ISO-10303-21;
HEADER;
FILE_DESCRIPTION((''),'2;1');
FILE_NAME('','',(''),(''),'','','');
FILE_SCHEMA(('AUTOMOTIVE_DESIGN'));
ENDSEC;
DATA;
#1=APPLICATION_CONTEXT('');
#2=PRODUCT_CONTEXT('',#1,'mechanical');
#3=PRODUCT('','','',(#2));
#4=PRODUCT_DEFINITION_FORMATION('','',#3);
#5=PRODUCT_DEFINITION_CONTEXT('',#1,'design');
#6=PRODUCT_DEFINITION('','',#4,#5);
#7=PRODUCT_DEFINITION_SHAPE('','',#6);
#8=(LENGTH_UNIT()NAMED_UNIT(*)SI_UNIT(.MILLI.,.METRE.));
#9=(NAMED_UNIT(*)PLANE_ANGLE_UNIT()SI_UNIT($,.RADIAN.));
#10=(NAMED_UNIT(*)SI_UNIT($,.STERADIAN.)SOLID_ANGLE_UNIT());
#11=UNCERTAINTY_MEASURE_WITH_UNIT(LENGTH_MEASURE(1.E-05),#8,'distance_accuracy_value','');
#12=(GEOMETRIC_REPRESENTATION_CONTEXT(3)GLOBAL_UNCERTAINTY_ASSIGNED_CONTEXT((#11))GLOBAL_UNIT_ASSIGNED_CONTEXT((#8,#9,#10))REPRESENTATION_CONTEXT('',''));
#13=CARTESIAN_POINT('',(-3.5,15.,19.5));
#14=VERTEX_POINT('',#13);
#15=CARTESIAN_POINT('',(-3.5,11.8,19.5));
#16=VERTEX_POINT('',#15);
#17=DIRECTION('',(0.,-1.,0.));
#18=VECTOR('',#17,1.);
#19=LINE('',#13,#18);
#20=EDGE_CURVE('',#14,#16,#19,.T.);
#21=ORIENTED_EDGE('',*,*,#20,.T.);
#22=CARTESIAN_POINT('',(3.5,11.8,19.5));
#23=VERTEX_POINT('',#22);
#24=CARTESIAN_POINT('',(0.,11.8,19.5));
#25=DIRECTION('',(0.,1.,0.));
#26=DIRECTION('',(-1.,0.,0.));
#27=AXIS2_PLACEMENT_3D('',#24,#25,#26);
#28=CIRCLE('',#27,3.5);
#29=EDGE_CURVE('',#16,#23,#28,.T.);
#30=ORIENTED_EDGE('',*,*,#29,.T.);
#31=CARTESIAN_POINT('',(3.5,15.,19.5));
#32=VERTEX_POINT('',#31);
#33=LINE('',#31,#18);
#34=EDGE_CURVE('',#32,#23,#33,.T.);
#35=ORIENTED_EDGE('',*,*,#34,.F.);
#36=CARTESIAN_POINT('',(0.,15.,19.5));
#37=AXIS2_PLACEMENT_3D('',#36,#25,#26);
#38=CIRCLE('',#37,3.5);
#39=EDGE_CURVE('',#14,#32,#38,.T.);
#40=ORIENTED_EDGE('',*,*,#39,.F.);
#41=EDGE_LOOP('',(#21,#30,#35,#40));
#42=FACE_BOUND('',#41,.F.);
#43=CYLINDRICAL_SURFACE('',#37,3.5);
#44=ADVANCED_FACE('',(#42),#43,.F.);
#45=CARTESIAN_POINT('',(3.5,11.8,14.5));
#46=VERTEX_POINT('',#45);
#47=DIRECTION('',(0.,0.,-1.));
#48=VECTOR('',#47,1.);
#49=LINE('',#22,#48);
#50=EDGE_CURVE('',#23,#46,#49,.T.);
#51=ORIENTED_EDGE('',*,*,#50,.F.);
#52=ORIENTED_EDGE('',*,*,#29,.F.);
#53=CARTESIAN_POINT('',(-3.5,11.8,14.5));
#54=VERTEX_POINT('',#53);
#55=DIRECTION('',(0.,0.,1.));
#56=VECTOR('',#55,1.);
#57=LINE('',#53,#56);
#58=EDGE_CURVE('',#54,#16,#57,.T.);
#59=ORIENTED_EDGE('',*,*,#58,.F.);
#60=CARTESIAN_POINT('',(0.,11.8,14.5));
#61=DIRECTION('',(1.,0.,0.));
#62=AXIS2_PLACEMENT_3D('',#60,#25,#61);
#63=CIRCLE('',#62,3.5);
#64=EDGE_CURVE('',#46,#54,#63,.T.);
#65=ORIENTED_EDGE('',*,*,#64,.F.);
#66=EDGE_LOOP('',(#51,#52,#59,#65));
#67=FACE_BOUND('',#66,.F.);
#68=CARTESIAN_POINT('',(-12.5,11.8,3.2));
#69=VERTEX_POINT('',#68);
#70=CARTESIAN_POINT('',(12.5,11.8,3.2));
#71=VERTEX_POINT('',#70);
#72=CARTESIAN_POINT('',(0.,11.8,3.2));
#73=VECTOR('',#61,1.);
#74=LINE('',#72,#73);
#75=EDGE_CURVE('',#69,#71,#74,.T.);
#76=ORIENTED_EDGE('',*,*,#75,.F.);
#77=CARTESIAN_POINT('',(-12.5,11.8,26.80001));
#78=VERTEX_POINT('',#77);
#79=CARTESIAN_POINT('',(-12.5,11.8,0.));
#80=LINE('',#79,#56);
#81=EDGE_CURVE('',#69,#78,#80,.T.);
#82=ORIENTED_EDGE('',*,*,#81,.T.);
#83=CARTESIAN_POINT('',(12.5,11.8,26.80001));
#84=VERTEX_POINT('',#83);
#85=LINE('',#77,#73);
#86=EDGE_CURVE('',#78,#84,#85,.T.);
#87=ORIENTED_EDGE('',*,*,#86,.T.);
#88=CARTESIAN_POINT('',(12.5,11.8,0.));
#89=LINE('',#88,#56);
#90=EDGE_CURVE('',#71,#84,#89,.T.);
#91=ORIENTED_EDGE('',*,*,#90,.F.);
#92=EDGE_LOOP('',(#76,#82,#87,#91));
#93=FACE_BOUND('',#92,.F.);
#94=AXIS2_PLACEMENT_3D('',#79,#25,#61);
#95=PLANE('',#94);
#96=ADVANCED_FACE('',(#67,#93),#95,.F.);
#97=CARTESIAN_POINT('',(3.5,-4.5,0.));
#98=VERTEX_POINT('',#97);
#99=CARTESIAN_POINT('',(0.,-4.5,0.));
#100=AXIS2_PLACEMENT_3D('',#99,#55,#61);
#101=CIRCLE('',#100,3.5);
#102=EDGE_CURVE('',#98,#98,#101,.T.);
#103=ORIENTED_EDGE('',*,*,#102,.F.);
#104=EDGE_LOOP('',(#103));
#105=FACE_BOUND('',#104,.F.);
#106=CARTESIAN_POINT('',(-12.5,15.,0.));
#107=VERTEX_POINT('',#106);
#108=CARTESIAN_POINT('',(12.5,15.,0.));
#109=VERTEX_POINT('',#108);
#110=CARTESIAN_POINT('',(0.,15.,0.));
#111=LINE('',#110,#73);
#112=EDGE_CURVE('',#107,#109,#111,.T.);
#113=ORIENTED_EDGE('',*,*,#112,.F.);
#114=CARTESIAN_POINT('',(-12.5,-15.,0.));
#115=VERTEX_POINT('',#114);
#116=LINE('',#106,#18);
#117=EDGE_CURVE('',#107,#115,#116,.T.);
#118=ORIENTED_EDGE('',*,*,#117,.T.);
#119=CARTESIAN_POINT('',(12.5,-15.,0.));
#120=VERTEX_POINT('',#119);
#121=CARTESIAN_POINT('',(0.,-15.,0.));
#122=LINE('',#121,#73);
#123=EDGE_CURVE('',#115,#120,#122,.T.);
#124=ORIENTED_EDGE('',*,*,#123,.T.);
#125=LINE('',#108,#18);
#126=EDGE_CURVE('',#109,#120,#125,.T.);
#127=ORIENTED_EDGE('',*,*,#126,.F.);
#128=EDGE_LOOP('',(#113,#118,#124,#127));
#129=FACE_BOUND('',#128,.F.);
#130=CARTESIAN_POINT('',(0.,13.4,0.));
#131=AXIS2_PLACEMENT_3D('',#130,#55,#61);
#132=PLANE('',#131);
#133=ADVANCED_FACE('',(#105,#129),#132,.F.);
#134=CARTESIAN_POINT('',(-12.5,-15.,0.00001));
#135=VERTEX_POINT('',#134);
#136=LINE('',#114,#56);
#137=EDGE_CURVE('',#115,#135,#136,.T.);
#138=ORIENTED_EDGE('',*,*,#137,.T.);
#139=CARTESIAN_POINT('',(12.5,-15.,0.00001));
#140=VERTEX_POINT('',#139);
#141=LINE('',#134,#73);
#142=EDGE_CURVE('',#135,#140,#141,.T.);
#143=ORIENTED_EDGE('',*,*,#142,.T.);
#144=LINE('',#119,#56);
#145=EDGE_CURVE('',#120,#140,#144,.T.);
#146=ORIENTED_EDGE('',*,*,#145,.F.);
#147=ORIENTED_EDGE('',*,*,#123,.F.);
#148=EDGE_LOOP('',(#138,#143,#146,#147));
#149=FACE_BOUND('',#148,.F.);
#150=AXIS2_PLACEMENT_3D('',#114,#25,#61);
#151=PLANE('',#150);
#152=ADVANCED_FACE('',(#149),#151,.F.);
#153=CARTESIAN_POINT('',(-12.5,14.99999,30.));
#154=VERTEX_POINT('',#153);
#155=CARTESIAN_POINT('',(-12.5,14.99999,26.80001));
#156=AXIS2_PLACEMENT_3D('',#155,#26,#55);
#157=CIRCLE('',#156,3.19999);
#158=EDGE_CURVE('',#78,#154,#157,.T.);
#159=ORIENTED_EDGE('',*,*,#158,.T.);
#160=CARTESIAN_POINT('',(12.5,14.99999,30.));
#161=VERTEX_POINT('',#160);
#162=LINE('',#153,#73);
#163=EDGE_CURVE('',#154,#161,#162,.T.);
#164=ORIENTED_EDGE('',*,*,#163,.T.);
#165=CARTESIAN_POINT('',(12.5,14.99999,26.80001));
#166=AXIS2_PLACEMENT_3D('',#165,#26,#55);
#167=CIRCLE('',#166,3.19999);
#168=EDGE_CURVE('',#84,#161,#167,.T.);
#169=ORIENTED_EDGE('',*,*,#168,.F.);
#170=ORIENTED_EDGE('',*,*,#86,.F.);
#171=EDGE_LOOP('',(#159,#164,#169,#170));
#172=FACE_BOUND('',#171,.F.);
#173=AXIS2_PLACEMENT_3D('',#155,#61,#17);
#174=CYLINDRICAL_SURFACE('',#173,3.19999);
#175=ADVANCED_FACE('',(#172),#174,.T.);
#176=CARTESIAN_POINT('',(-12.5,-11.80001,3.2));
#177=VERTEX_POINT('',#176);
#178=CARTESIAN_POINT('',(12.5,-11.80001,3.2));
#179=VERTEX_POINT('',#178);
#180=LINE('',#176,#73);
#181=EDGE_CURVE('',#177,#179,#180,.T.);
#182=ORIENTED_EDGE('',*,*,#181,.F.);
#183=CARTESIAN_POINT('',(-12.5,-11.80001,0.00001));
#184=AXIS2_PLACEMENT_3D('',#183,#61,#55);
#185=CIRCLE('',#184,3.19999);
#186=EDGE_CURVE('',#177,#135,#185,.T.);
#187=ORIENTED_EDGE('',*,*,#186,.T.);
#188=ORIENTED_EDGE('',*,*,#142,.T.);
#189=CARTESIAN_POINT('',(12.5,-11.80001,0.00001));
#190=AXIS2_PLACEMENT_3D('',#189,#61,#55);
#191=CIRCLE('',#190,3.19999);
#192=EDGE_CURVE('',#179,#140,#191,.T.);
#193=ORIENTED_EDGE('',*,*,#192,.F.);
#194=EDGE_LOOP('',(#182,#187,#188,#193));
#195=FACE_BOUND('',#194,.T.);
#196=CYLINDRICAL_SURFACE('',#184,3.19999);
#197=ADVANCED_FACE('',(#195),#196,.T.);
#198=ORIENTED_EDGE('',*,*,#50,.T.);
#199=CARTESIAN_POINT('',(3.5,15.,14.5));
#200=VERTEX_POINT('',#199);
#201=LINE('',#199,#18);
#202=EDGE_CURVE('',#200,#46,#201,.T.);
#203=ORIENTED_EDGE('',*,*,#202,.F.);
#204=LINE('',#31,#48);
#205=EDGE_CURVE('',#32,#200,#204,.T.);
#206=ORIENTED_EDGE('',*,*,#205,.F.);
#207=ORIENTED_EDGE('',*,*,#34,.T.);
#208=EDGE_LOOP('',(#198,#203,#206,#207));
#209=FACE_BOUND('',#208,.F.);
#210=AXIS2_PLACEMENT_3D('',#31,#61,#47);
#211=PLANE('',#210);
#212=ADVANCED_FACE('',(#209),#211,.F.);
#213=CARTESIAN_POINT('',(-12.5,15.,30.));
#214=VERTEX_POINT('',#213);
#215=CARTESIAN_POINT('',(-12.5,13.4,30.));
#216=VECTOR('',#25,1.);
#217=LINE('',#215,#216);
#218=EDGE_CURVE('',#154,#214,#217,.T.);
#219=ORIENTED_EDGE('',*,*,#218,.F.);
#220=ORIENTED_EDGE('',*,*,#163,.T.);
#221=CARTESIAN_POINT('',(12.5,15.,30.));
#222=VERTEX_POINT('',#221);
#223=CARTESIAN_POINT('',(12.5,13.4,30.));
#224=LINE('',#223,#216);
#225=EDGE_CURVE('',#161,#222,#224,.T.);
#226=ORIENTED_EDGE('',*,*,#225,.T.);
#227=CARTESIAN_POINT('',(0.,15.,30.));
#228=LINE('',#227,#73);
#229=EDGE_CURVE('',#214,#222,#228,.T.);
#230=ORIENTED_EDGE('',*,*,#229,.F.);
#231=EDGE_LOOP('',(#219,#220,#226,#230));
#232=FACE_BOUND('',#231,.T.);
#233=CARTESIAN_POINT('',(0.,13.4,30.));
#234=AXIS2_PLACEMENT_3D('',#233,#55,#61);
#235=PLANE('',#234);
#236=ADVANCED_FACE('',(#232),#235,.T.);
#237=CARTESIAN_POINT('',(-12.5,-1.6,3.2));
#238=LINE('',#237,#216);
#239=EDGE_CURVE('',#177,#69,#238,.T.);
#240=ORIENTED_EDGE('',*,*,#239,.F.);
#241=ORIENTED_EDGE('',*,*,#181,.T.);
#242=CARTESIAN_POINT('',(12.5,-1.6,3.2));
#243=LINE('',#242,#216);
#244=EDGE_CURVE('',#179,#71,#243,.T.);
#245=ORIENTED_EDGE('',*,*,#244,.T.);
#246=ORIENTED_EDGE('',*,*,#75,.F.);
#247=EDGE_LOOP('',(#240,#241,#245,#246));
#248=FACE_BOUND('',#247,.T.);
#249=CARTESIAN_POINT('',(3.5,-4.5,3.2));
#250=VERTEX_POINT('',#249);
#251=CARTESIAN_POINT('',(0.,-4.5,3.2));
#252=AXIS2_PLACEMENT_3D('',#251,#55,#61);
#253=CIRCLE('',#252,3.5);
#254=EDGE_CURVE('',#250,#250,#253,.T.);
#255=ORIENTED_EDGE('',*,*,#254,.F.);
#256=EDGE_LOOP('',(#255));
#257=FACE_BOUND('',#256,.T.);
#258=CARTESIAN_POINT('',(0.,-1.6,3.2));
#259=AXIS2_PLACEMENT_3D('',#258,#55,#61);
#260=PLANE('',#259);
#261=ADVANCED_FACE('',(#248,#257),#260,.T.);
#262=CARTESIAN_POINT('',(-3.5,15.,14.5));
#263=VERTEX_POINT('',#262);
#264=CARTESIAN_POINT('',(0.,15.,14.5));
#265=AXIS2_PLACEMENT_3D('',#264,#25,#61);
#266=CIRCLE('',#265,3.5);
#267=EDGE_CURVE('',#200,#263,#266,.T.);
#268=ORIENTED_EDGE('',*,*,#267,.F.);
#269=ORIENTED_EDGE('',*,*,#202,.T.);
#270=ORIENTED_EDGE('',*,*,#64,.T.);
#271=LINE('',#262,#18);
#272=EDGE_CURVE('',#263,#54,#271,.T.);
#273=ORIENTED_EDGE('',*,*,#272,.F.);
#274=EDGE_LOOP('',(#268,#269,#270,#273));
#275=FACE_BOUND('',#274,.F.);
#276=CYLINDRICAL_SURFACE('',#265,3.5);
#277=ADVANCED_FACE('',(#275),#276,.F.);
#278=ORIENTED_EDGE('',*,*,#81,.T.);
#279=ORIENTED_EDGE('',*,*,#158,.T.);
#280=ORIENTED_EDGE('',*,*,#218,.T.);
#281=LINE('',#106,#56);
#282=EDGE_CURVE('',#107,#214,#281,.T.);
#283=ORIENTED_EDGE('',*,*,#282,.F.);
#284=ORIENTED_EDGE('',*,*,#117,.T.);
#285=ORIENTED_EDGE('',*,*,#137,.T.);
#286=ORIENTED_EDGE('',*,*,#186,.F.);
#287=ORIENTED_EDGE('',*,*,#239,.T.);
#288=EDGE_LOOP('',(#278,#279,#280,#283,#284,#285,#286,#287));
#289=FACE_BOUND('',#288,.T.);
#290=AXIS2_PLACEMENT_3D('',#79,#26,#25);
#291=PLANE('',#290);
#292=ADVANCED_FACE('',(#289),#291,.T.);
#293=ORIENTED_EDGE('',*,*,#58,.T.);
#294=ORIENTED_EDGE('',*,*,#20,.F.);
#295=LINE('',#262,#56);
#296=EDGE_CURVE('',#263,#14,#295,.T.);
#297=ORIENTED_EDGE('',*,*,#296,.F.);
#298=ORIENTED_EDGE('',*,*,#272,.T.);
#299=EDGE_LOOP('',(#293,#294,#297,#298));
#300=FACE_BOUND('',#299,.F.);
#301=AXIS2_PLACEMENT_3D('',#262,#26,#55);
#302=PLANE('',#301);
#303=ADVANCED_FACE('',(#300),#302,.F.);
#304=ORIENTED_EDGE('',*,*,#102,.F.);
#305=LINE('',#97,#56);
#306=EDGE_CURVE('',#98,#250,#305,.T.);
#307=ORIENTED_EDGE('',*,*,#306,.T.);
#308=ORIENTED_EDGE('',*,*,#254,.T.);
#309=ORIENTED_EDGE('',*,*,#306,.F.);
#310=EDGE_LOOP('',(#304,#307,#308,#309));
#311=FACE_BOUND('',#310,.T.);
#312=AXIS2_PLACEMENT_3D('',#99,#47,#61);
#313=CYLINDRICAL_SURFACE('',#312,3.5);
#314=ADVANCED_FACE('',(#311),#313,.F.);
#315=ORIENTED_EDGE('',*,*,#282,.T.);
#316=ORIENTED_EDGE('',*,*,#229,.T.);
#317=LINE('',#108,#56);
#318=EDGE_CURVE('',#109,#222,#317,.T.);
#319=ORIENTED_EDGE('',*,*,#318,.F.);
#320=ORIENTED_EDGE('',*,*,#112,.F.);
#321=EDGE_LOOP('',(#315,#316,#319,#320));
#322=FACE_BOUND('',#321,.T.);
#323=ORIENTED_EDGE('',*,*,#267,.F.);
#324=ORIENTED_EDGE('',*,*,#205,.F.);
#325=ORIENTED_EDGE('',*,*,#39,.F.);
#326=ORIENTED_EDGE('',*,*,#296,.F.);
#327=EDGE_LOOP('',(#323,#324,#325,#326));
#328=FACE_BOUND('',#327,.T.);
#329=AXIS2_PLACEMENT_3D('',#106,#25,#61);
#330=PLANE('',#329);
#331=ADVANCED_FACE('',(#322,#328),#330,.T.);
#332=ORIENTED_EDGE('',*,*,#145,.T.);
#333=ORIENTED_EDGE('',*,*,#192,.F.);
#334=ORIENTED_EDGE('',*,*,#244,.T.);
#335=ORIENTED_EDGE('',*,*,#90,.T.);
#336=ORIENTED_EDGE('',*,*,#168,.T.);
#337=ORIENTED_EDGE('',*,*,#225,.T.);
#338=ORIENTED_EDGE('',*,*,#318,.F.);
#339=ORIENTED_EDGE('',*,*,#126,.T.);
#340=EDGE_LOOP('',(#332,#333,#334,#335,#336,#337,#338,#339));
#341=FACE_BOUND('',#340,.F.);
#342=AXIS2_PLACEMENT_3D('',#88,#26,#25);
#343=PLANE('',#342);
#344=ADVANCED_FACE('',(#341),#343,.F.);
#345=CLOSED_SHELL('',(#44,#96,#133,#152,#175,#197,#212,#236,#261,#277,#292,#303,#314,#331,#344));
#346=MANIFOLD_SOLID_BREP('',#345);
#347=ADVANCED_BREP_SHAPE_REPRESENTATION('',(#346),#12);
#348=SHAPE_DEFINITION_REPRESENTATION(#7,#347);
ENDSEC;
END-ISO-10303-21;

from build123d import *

# Parameters (mm, degrees)
F0_W     = 25
F0_H     = 26.8
F0_R     = 3.5
F1_DEPTH = 3.2
F0_H_2   = 3.2
F2_DEPTH = 30
F4_DEPTH = 3.2
F5_R     = 3.19999
F6_R     = 3.19999


# Not quite as in the source:
# - a fillet or chamfer is up to 0.001 mm smaller than in the source, because OpenCascade refuses the exact size


with BuildPart() as f1:
    # F0 (on Top) → F1 (new body)
    with BuildSketch(Plane.XY):
        with Locations((0, -1.6)):
            Rectangle(F0_W, F0_H)
        with Locations((0, -4.5)):
            Circle(F0_R, mode=Mode.SUBTRACT)
    extrude(amount=F1_DEPTH)

    # F0 (on Top) → F2 (join)
    with BuildSketch(Plane.XY):
        with Locations((0, 13.4)):
            Rectangle(F0_W, F0_H_2)
    extrude(amount=F2_DEPTH)

    # F3 (on face) → F4 (cut)
    with BuildSketch(Plane(origin=(0, 15, 0), x_dir=(-1, 0, 0), z_dir=(0, 1, 0))):
        with BuildLine():
            Line((-3.5, 19.5), (-3.5, 14.5))
            ThreePointArc((-3.5, 14.5), (0, 11), (3.5, 14.5))
            Line((3.5, 14.5), (3.5, 19.5))
            ThreePointArc((3.5, 19.5), (0, 23), (-3.5, 19.5))
        make_face()
    extrude(amount=-F4_DEPTH, mode=Mode.SUBTRACT)

    # F5 (radius 3.2 in the source; OpenCascade refuses exactly that, so slightly less here)
    f5_edges = [f1.edges().sort_by_distance(p)[0] for p in [
        (0, 11.8, 30),
    ]]
    fillet(f5_edges, radius=F5_R)

    # F6 (radius 3.2 in the source; OpenCascade refuses exactly that, so slightly less here)
    f6_edges = [f1.edges().sort_by_distance(p)[0] for p in [
        (0, -15, 3.2),
    ]]
    fillet(f6_edges, radius=F6_R)


solid = f1.part
